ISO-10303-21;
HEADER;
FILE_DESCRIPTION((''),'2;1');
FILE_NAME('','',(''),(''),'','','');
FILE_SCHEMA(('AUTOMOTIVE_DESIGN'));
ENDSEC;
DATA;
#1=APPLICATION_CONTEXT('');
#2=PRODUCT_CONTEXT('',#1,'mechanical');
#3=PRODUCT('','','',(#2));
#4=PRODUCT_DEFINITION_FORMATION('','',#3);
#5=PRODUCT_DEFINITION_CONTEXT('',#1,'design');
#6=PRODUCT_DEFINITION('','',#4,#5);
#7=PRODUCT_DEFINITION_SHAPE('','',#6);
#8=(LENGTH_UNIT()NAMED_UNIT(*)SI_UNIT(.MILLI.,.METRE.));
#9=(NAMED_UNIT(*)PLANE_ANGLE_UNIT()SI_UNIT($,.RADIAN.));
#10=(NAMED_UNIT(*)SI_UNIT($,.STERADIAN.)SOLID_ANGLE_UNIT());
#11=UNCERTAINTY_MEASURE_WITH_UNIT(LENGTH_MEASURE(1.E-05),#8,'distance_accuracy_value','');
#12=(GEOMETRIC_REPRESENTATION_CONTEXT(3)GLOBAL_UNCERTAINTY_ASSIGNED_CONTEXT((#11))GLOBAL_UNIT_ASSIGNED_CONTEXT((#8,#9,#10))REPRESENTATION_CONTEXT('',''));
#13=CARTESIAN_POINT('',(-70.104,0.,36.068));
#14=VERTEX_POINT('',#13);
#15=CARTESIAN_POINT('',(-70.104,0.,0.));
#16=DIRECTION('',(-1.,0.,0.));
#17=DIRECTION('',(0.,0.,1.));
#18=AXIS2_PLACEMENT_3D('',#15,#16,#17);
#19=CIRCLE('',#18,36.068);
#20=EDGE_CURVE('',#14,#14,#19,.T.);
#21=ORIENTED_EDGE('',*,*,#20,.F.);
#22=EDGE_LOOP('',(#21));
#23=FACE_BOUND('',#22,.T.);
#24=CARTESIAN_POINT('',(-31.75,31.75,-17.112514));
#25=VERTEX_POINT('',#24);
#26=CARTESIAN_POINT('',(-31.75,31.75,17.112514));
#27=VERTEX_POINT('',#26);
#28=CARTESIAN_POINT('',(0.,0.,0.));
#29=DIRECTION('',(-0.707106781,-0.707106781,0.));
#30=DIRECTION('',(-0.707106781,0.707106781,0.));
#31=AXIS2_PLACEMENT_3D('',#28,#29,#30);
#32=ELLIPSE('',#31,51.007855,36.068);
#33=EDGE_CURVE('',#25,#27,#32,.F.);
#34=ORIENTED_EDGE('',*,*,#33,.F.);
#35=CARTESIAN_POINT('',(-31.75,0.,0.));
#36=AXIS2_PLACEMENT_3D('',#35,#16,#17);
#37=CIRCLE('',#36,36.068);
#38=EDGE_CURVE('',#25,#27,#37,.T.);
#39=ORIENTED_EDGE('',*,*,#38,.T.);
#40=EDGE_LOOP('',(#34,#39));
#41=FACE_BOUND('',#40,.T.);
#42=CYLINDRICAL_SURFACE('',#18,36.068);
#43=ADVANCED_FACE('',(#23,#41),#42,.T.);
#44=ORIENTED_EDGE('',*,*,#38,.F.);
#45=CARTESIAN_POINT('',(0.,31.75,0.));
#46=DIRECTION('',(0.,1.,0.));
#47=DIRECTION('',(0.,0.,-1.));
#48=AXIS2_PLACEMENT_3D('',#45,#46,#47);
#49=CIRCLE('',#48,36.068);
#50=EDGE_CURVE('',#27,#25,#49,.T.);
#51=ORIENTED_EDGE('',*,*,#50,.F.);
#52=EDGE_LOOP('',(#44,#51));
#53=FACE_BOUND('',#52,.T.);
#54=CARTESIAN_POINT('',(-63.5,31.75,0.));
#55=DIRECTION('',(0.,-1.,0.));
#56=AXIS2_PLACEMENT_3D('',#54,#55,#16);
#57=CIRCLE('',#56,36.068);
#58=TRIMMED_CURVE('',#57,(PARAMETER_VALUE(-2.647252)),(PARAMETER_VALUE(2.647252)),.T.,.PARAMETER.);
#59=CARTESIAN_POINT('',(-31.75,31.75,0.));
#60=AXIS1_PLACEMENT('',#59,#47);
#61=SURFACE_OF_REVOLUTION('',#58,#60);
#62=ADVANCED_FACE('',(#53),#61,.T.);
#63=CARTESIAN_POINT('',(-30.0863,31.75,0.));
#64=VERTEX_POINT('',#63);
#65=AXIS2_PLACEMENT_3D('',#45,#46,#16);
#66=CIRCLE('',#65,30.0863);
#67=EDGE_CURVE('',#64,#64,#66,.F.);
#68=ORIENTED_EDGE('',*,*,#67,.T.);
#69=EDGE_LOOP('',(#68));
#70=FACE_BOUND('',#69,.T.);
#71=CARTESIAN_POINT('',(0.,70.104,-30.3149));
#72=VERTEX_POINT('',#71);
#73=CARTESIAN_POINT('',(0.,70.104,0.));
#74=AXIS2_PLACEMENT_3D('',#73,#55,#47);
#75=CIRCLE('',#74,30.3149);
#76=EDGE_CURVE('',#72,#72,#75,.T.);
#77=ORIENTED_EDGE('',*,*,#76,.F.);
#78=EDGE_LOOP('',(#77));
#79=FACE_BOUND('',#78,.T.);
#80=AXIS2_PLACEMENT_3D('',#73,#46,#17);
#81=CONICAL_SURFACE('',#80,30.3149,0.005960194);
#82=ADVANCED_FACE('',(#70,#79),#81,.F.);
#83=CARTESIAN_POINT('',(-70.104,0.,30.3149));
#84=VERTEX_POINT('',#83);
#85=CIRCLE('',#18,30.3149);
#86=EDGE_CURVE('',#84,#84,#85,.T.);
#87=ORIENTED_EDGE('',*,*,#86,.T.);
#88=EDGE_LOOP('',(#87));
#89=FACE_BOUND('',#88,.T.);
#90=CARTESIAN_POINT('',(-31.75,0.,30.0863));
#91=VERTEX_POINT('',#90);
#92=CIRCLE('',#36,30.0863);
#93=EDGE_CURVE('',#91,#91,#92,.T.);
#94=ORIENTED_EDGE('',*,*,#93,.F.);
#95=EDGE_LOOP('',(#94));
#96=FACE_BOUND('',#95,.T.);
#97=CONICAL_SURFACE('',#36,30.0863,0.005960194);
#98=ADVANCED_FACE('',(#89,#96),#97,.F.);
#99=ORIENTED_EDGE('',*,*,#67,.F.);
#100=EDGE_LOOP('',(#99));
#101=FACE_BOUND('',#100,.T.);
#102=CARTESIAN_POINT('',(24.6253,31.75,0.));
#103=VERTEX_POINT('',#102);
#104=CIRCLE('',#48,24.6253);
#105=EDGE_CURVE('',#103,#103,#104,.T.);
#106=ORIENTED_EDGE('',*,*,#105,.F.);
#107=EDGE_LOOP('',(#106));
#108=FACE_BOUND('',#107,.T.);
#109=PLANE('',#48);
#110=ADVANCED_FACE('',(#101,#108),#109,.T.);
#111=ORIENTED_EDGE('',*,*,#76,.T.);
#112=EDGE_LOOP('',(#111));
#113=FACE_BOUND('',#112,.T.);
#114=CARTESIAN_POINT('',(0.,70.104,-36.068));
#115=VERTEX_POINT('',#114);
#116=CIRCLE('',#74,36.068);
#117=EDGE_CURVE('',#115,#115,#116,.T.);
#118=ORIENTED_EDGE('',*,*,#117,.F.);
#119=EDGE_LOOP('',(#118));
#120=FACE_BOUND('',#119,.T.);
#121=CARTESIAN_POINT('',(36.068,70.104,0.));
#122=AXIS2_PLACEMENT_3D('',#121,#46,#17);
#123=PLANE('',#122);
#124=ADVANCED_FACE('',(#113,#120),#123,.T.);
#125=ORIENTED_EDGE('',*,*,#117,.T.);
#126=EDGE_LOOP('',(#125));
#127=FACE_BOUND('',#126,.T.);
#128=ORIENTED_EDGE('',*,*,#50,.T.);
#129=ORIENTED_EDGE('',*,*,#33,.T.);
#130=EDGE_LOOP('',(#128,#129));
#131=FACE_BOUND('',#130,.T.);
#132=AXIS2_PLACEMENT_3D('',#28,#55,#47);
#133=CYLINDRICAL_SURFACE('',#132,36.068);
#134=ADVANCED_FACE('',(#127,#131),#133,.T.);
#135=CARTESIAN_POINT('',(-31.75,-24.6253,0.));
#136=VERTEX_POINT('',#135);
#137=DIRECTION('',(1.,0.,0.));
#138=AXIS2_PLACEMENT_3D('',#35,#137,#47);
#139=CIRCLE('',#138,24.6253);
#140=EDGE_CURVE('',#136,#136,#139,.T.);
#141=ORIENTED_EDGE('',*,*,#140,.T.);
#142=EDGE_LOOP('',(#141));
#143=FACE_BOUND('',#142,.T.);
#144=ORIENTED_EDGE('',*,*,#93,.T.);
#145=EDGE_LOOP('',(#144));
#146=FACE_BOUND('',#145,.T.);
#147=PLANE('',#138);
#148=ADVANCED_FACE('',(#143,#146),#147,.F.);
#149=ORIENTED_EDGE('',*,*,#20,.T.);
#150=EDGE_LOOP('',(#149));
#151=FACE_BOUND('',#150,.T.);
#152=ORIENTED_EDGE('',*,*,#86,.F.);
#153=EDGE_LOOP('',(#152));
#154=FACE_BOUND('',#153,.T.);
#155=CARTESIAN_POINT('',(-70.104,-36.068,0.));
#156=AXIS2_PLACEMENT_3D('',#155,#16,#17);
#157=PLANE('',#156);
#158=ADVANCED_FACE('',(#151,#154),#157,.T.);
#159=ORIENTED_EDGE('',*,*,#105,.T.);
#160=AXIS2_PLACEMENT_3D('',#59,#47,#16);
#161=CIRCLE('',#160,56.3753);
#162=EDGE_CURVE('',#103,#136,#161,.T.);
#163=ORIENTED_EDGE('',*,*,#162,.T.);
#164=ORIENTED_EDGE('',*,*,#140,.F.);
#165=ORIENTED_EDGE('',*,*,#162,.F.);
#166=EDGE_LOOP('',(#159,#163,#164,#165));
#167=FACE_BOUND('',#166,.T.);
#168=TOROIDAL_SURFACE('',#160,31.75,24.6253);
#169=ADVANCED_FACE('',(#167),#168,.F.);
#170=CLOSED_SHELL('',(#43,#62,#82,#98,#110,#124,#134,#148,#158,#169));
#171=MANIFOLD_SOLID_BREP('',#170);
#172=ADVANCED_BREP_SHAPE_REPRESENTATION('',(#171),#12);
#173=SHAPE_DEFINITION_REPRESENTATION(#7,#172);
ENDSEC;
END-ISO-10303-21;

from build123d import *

# Parameters (mm, degrees)
SKETCH3_R   = 36.068
SKETCH3_R_2 = 24.6253


with BuildPart() as part:
    # Sketch1 → Revolve1 (revolve)
    with BuildSketch(Plane.XY):
        Polygon((-70.104, -36.068), (-31.75, -36.068), (-31.75, -30.0863), (-70.104, -30.3149), align=None)
    revolve(axis=Axis((-70.104, 0, 0), (1, 0, 0)))


with BuildPart() as body_2:
    # Sketch2 → Revolve2 (revolve)
    with BuildSketch(Plane.XY):
        Polygon((30.3149, 70.104), (30.0863, 31.75), (36.068, 31.75), (36.068, 70.104), align=None)
    revolve(axis=Axis((0, 0, 0), (0, 1, 0)))


with BuildPart() as sweep1_tool:
    # Sweep1: sweep along a path in Sketch4
    with BuildLine(Plane.XY) as sweep1_path:
        ThreePointArc((-31.75, 0), (-9.29936, 9.29936), (0, 31.75))
    # Sketch3 → Sweep1 (sweep)
    with BuildSketch(Plane(origin=(-31.75, 0, 0), x_dir=(0, 0, -1), z_dir=(1, 0, 0))):
        Circle(SKETCH3_R)
        Circle(SKETCH3_R_2, mode=Mode.SUBTRACT)
    sweep(path=sweep1_path.line)


with BuildPart() as part_1:
    add(part.part)


with BuildPart() as part_2:
    # Sweep1: joined with sweep1_tool
    add(part_1.part.fuse(sweep1_tool.part, body_2.part, tol=0.00001))


solid = part_2.part
